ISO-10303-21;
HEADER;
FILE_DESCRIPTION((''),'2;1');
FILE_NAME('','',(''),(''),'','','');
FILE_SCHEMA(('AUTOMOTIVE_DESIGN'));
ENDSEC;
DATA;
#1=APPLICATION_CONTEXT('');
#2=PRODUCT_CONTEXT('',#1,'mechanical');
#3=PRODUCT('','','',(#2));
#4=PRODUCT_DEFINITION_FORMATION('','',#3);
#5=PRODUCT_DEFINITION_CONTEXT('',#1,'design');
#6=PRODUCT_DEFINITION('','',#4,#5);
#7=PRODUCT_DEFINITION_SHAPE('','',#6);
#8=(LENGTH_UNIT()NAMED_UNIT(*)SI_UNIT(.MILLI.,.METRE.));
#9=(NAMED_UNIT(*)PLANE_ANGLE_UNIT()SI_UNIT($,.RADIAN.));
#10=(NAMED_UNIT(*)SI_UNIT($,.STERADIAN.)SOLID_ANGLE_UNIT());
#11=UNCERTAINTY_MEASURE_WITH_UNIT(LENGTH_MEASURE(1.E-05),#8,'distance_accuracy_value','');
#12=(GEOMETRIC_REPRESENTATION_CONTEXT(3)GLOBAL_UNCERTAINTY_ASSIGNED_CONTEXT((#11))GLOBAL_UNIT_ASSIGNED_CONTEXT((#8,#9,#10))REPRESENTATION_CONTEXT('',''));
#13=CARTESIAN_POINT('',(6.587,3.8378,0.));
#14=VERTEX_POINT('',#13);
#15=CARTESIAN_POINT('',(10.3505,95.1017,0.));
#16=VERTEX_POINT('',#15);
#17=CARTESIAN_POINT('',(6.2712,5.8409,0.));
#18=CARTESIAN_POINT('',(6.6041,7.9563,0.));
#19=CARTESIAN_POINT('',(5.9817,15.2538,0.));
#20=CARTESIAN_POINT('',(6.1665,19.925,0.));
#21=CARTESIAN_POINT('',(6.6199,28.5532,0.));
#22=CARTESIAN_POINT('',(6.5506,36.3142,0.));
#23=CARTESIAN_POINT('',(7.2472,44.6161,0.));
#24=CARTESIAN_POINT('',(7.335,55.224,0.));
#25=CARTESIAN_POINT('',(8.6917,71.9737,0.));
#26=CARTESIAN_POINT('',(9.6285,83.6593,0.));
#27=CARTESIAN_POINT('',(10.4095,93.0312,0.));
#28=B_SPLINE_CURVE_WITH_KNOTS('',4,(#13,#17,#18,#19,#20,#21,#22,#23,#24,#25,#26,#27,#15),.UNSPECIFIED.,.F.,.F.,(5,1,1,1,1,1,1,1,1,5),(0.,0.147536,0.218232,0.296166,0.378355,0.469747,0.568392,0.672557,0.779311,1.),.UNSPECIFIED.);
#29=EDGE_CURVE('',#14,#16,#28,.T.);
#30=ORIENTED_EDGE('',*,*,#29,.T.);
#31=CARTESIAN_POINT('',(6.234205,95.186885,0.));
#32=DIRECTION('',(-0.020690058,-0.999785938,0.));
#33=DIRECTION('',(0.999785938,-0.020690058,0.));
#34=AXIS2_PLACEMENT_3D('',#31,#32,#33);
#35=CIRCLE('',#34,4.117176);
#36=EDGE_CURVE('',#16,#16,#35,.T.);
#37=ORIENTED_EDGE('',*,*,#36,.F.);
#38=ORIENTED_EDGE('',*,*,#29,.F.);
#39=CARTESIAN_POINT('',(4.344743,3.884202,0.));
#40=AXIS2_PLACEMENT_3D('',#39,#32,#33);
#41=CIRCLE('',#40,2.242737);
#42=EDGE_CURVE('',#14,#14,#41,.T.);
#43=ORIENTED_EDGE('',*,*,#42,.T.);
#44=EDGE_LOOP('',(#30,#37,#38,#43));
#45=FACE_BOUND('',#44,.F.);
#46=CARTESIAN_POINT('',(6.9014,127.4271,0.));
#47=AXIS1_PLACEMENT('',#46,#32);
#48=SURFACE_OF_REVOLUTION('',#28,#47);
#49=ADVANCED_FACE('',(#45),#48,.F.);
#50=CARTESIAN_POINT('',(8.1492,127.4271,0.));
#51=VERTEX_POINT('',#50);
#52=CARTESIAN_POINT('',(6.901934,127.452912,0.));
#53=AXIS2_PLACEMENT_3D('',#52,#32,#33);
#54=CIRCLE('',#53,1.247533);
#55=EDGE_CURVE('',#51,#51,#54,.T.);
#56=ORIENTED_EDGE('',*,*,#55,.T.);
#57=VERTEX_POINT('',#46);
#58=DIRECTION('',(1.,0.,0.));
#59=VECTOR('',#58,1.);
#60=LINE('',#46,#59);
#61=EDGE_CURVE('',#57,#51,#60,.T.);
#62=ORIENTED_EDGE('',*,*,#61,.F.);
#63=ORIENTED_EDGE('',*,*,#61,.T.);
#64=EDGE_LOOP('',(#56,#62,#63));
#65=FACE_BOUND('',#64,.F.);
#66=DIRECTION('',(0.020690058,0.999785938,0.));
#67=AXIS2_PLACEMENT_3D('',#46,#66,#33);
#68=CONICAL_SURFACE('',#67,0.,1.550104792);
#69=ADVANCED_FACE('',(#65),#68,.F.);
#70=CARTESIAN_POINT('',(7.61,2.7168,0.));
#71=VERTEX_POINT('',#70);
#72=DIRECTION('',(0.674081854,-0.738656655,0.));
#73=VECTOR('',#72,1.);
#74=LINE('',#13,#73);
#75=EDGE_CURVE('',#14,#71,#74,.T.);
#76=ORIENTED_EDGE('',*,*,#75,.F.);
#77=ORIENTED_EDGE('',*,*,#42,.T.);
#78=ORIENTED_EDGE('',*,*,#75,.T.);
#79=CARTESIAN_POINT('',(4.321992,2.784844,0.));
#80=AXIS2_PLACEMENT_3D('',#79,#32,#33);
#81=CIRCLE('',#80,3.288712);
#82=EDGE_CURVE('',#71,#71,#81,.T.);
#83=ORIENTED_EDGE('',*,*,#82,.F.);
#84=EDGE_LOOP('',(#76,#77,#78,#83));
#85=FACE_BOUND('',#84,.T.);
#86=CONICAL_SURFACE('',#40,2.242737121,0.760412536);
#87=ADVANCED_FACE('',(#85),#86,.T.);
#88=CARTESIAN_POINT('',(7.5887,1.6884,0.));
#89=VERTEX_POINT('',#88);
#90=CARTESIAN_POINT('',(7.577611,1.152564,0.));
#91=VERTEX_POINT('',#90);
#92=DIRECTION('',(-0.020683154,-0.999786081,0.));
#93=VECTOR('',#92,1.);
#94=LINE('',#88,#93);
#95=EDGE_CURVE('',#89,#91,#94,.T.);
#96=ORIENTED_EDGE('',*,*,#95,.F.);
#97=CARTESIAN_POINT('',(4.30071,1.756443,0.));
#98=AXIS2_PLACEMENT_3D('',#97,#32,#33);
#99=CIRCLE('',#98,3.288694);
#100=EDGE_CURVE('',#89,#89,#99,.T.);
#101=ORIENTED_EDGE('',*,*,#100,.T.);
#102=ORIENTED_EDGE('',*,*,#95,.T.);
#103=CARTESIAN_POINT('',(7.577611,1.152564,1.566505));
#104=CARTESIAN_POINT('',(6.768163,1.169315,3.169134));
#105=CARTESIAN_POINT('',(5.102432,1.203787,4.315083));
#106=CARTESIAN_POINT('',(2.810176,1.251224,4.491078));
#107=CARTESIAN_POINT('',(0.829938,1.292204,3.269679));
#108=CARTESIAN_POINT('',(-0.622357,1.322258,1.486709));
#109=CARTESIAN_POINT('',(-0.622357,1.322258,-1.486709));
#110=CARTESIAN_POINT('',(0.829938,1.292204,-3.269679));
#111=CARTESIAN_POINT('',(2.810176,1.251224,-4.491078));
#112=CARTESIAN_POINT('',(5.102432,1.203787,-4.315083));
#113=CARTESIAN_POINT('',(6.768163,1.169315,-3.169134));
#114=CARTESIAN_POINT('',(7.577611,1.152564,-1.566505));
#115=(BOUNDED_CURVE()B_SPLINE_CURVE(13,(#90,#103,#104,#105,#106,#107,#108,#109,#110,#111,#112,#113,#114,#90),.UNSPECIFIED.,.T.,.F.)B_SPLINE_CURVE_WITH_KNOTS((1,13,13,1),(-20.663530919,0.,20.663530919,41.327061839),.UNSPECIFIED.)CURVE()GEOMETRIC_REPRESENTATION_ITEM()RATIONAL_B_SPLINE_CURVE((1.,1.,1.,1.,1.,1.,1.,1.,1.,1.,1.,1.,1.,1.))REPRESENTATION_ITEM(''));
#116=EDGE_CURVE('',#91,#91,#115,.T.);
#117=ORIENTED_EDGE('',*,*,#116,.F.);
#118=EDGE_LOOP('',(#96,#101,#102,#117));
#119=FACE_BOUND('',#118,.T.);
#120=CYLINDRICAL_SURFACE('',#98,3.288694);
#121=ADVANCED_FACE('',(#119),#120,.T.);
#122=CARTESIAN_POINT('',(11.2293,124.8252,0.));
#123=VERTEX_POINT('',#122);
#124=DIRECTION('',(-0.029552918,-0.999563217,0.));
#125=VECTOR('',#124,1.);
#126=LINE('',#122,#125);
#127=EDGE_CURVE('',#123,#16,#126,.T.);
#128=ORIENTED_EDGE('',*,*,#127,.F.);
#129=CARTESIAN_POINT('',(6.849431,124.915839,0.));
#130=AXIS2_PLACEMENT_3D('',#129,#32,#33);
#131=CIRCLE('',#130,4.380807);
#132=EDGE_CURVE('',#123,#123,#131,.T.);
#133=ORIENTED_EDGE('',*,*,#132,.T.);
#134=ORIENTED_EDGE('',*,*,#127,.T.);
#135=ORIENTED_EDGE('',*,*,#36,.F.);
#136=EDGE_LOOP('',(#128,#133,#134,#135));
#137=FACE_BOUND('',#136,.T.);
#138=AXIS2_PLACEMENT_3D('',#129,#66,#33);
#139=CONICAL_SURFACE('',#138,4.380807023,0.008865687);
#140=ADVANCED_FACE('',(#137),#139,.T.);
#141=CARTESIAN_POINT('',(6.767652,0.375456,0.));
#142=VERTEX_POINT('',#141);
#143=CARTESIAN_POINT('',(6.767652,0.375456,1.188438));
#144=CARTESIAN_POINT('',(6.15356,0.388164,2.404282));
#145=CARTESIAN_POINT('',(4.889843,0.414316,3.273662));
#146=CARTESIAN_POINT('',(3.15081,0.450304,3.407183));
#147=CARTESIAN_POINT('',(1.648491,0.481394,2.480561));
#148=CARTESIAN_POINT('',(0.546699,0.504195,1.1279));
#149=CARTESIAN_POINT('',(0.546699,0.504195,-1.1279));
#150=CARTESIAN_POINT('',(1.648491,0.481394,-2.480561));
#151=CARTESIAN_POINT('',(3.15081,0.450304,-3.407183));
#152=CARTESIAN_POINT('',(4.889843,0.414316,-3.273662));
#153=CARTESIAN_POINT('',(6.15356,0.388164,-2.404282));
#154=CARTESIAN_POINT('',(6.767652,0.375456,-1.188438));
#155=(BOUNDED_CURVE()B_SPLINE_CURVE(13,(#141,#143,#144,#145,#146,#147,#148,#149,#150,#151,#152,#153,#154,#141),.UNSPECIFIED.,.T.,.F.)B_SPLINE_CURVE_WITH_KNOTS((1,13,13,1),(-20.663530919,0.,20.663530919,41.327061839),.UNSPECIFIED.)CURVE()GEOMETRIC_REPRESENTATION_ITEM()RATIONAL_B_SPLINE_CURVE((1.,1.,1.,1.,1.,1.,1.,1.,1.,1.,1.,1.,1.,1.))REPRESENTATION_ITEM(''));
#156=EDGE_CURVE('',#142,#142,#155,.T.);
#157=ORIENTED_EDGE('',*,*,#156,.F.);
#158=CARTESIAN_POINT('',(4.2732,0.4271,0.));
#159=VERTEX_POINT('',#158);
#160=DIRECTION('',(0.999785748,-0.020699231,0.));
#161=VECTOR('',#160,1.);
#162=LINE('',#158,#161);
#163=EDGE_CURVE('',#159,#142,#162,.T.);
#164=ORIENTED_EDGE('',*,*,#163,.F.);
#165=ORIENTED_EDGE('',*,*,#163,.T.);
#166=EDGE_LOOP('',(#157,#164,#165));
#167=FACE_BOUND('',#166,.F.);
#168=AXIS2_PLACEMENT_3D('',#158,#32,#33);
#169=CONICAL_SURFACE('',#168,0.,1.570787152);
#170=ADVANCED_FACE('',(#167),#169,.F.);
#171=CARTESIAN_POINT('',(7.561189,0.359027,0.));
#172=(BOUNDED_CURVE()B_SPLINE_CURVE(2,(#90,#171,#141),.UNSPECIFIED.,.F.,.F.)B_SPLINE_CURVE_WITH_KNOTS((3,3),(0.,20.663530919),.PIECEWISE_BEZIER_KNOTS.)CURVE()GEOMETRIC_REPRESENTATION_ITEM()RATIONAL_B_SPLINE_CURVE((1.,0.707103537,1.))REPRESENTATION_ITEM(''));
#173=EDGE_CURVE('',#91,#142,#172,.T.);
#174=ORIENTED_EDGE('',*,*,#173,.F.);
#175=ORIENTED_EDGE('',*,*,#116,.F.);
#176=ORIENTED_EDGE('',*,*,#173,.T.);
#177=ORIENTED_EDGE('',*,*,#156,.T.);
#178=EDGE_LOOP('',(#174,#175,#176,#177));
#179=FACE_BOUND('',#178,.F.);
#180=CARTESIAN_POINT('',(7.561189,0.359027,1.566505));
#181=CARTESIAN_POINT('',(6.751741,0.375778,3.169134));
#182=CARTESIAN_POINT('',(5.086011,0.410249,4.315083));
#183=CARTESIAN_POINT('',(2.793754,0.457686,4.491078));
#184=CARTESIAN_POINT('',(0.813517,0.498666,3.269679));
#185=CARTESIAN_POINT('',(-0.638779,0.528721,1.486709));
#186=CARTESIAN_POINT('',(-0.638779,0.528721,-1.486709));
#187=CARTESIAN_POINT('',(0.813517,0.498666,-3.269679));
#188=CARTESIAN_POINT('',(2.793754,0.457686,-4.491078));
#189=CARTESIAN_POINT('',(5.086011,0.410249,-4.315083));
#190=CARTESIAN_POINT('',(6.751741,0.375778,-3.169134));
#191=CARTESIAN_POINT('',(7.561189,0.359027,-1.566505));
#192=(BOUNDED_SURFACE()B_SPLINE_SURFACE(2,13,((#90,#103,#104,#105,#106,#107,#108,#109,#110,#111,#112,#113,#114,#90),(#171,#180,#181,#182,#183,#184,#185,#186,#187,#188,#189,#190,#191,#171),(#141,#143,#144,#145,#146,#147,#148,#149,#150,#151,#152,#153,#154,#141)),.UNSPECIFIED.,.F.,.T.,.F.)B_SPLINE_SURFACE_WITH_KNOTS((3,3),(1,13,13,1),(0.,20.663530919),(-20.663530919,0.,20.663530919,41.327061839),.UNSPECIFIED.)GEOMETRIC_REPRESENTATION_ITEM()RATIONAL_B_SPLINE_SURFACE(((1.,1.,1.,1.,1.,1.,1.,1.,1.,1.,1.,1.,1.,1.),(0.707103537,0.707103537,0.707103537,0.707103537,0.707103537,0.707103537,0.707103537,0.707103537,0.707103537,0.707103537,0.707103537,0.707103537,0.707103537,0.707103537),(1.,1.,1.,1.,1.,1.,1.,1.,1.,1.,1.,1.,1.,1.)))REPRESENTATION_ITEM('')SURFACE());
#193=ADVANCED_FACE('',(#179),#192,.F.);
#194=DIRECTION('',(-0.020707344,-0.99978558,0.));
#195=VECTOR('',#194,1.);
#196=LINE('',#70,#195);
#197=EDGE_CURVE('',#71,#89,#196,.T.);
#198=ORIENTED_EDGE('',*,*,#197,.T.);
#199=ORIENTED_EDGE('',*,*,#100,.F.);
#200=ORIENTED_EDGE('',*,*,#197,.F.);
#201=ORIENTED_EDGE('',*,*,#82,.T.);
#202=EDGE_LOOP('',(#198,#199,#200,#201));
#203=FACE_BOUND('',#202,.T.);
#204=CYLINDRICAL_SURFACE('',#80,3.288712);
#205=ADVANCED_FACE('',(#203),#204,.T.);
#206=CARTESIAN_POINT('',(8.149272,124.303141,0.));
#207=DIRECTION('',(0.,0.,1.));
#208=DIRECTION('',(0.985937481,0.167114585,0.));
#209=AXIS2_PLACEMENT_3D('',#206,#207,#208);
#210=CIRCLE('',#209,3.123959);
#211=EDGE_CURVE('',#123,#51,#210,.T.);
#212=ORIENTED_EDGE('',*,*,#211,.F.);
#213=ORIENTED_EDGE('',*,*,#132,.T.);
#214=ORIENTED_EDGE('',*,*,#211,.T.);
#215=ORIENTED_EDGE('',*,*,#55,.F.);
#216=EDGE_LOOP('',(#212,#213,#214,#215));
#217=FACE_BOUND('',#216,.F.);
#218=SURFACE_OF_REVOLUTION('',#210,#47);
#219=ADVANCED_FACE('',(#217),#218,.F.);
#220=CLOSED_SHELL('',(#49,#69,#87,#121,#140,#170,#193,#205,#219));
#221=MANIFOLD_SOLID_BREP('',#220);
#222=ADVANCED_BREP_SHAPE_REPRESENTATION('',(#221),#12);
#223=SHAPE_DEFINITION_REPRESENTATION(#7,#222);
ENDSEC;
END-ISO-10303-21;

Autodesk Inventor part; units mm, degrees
ref_plane "YZ Plane" through (0, 0, 0) normal (1, 0, 0) x (0, 1, 0)
ref_plane "XZ Plane" through (0, 0, 0) normal (0, 1, 0) x (-1, 0, 0)
ref_plane "XY Plane" through (0, 0, 0) normal (0, 0, 1) x (1, 0, 0)
sketch "Sketch1" plane through (0, 0, 0) normal (0, 0, 1) x (1, 0, 0)
  line L0 (-30.3345, 130.8414) -> (42.1735, 130.8414) construction
  line L1 (42.1735, 130.8414) -> (42.1735, -3.4075) construction
  line L2 (42.1735, -3.4075) -> (-30.3345, -3.4075) construction
  line L3 (-30.3345, -3.4075) -> (-30.3345, 130.8414) construction
  line L4 (6.9014, 127.4271) -> (4.2732, 0.4271)
  line L5 (6.9014, 127.4271) -> (8.1492, 127.4271)
  line L6 (11.2293, 124.8252) -> (10.3505, 95.1017)
  arc A0 (11.2293, 124.8252) -> (8.1492, 127.4271) centre (8.1492, 124.3031) ccw
  line L7 (7.61, 2.7168) -> (7.5887, 1.6884)
  line L8 (4.2732, 0.4271) -> (7.3741, 0.3629)
  line L9 (7.5887, 1.6884) -> (7.5612, 0.3591)
  line L10 (7.5612, 0.3591) -> (7.3741, 0.3629)
  spline S0 degree 4 poles (6.587, 3.8378) (6.2712, 5.8409) (6.6041, 7.9563) (5.9817, 15.2538) (6.1665, 19.925) (6.6199, 28.5532) (6.5506, 36.3142) (7.2472, 44.6161) (7.335, 55.224) (8.6917, 71.9737) (9.6285, 83.6593) (10.4095, 93.0312) (10.3505, 95.1017) knots 0 0 0 0 0 0.147536 0.218232 0.296166 0.378355 0.469747 0.568392 0.672557 0.779311 1 1 1 1 1
  line L11 (6.9014, 127.4271) -> (4.2732, 0.4271)
  line L12 (4.2732, 0.4271) -> (7.5612, 0.3591)
  line L13 (7.5612, 0.3591) -> (7.61, 2.7168)
  line L14 (6.587, 3.8378) -> (7.61, 2.7168)
  line L15 (10.3505, 95.1017) -> (10.3505, 95.1017)
  point P0 (10.1652, 126.6895)
  point P1 (6.4077, 6.4455)
  point P2 (6.3449, 10.2492)
  point P3 (6.1367, 15.513)
  point P4 (6.1805, 19.8067)
  point P5 (6.4933, 27.514)
  point P6 (6.6812, 35.8156)
  point P7 (7.0731, 43.8868)
  point P8 (7.4743, 54.4812)
  point P9 (8.3882, 68.2194)
  point P10 (9.4255, 81.0774)
  point P11 (10.1904, 91.1338)
  dimension "d3" = 134.249
  dimension "d20" = 127
revolve "Revolution2" add sketch "Sketch1" angle 360 about axis through (6.9014, 127.4271, 0) along (-0.02069, -0.9997859, 0)
fillet "Fillet1" radius 0.7937 1 edges at (0.9852, 0.4951, 0)
equation "\"d3\" = 1.05708 * d20"
properties part number "Baseball Bat"
